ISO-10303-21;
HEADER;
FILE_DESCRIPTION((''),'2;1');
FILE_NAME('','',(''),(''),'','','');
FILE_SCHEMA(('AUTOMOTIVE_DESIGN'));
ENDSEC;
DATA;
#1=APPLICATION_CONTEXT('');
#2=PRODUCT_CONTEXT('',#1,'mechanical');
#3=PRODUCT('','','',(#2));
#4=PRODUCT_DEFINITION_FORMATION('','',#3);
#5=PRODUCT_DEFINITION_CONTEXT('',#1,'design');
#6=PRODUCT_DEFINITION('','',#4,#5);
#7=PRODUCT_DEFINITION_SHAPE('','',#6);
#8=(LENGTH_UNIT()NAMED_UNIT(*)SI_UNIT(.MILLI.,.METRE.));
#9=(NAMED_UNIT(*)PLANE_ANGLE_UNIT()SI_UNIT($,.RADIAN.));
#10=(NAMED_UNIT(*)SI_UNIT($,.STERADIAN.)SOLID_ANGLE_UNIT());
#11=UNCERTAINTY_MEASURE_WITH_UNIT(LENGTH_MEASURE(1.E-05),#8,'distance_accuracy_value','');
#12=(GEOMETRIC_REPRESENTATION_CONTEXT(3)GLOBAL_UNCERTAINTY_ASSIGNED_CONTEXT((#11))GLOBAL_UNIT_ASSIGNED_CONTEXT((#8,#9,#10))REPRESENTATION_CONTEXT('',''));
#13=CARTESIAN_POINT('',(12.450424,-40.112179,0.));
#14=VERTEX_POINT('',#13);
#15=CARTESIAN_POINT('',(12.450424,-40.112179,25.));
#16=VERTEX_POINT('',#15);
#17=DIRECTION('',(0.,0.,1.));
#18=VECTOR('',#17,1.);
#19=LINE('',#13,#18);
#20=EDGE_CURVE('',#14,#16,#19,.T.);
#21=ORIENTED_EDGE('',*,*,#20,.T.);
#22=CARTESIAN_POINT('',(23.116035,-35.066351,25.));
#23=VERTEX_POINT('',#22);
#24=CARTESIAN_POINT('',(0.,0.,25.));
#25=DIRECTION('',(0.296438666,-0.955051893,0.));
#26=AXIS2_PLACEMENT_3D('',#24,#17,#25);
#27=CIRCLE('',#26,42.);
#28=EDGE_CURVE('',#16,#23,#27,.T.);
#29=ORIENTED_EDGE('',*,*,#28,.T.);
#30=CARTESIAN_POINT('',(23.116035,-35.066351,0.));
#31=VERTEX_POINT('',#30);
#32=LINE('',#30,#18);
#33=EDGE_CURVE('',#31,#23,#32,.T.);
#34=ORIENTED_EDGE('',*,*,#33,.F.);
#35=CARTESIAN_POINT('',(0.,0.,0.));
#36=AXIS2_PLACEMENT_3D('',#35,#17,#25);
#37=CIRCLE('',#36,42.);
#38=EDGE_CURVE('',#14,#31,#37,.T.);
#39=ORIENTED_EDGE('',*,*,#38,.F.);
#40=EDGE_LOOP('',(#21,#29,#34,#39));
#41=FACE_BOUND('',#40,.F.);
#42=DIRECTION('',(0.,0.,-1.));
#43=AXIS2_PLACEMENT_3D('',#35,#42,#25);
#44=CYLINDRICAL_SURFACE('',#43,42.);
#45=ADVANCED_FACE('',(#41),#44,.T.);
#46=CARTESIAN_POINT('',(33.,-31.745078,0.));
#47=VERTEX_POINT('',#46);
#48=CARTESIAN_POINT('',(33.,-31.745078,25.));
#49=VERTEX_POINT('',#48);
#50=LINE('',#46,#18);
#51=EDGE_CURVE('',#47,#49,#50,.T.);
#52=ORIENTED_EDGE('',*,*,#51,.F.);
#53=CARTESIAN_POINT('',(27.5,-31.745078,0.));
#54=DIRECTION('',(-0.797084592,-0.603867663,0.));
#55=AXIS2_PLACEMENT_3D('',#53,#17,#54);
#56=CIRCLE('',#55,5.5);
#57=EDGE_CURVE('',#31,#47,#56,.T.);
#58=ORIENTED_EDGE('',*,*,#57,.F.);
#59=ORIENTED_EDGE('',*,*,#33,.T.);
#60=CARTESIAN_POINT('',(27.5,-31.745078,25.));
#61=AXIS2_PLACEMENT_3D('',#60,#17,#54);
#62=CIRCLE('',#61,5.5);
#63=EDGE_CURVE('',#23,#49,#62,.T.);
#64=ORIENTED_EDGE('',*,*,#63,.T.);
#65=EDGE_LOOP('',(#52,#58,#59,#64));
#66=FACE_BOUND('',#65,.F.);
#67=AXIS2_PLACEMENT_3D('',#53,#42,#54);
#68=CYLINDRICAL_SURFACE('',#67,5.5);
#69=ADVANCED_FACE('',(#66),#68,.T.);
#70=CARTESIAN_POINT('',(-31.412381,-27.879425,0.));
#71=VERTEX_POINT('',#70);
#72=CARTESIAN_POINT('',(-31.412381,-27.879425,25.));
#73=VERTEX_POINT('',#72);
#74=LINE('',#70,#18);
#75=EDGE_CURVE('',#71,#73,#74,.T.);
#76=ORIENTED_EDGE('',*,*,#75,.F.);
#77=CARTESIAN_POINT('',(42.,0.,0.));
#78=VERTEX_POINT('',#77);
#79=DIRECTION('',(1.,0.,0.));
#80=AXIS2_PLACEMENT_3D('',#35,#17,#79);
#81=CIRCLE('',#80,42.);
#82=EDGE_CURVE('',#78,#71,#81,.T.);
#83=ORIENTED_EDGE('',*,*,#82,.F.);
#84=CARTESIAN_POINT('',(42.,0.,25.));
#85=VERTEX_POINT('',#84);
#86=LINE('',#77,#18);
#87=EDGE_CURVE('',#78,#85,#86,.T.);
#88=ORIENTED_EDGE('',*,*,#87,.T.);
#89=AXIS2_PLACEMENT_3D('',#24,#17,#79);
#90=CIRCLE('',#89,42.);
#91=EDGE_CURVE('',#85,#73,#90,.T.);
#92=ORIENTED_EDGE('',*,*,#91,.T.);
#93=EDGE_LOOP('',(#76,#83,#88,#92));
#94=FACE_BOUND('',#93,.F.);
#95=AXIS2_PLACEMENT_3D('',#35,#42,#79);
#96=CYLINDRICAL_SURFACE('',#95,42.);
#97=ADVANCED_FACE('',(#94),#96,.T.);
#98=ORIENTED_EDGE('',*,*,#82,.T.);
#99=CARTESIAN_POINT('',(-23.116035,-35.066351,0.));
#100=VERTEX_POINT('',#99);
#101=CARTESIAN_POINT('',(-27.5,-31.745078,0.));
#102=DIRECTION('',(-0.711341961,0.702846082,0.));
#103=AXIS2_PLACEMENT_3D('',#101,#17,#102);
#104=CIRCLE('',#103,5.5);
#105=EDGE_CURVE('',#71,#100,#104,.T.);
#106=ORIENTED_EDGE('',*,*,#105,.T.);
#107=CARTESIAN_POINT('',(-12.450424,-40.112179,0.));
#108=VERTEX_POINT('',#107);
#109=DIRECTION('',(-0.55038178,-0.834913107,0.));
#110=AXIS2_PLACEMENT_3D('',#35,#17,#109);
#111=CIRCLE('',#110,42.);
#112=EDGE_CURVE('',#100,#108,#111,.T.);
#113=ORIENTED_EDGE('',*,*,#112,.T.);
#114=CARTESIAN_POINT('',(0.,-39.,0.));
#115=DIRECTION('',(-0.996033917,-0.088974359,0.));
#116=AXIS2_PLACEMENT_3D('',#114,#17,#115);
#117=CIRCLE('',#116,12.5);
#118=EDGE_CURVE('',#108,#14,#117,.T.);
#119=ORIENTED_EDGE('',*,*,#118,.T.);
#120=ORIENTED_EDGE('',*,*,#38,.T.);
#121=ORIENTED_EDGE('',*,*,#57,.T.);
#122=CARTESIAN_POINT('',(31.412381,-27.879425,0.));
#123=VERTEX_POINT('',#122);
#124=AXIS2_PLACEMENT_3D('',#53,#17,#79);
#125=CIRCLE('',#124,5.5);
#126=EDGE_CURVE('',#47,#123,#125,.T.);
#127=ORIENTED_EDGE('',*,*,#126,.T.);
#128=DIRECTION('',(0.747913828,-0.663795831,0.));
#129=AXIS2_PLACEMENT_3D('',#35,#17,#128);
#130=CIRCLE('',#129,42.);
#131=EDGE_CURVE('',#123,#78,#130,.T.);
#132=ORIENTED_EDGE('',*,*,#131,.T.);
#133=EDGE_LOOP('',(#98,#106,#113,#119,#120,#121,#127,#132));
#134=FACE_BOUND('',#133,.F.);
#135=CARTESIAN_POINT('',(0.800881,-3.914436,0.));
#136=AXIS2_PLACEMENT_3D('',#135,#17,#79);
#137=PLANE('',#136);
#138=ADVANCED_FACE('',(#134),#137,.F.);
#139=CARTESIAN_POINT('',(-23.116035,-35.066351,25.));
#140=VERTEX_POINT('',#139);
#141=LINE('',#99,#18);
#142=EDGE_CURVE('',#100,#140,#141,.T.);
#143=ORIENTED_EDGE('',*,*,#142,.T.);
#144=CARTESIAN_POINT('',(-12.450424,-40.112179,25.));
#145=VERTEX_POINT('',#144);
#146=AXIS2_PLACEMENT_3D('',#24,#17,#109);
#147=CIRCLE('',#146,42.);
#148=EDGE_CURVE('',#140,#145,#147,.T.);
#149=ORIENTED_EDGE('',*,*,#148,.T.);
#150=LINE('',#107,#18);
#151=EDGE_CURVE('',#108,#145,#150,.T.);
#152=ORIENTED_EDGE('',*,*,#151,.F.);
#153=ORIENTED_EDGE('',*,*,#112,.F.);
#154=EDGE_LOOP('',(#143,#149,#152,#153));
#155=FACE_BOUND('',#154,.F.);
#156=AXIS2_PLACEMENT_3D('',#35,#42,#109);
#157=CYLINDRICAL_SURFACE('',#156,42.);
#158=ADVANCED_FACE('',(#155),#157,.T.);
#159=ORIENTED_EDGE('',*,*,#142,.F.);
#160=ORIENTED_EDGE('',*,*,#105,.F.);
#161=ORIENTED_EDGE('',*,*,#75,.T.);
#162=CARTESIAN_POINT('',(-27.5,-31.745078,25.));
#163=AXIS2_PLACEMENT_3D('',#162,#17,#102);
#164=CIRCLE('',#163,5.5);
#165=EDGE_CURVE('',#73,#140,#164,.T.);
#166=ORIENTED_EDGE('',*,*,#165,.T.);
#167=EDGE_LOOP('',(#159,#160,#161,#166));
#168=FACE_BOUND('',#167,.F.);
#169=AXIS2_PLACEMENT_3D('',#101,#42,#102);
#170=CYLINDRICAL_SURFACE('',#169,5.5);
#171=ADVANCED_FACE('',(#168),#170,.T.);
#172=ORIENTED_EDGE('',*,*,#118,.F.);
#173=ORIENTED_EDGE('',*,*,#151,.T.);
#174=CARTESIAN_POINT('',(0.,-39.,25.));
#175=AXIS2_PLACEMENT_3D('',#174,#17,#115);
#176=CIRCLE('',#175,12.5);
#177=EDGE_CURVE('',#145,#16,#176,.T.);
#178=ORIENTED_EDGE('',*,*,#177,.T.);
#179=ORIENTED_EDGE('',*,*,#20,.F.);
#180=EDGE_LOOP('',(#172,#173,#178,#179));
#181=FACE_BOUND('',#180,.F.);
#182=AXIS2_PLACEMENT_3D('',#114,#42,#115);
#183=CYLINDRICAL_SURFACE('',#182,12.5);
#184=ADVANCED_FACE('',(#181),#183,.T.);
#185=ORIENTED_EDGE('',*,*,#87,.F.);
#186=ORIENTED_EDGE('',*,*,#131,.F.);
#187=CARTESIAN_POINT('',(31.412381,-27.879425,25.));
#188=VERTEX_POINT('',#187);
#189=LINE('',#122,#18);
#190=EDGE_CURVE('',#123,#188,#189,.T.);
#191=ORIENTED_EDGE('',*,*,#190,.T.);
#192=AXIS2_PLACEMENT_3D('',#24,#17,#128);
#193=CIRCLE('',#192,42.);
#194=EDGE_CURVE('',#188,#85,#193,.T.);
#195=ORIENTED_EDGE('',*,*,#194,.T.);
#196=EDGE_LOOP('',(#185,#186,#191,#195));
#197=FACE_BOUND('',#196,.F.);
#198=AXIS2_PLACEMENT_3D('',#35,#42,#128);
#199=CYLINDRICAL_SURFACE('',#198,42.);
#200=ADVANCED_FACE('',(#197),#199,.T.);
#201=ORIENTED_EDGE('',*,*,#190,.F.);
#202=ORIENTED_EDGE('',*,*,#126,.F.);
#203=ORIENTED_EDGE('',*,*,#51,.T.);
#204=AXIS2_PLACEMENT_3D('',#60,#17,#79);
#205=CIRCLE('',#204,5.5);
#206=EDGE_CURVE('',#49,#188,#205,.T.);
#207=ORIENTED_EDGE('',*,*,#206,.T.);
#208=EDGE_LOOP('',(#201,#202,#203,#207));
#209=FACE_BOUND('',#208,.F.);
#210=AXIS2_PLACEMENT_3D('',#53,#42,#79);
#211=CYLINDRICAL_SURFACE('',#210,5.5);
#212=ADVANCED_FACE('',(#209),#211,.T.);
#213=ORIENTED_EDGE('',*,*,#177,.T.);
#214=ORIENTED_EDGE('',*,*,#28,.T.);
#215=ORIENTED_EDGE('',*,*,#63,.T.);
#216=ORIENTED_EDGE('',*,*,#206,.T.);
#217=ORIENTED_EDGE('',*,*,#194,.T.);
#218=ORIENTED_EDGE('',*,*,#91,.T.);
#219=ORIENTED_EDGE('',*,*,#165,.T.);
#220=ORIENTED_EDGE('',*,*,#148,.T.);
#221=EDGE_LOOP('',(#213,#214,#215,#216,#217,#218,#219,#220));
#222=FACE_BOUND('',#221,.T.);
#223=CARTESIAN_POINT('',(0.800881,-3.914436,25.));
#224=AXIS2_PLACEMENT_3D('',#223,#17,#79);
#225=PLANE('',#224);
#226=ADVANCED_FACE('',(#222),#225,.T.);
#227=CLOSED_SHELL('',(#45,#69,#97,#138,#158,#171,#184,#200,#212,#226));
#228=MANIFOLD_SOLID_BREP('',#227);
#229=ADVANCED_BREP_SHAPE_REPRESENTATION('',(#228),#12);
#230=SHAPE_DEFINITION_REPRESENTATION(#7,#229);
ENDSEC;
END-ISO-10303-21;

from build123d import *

# Parameters (mm, degrees)
F1_DEPTH = 25


with BuildPart() as f1:
    # F0 (on Top) → F1 (new body)
    with BuildSketch(Plane.XY):
        with BuildLine():
            ThreePointArc((31.4123807864, -27.8794249104), (39.2639783582, -14.9110698304), (42, 0))
            ThreePointArc((42, 0), (-14.9110698304, 39.2639783582), (-31.4123807864, -27.8794249104))
            ThreePointArc((-31.4123807864, -27.8794249104), (-25.4105137384, -26.6574416615), (-22, -31.7450783587))
            ThreePointArc((-22, -31.7450783587), (-22.2864690998, -33.4969617889), (-23.1160347465, -35.066350503))
            ThreePointArc((-23.1160347465, -35.066350503), (-17.9613012827, -37.9656641748), (-12.4504239602, -40.1121794872))
            ThreePointArc((-12.4504239602, -40.1121794872), (-0.5566419395, -26.5124001605), (12.5, -39))
            ThreePointArc((12.5, -39), (12.4875998395, -39.5566419395), (12.4504239602, -40.1121794872))
            ThreePointArc((12.4504239602, -40.1121794872), (17.9613012827, -37.9656641748), (23.1160347465, -35.066350503))
            ThreePointArc((23.1160347465, -35.066350503), (23.8988095238, -27.5879847641), (31.4123807864, -27.8794249104))
        make_face()
        with BuildLine():
            ThreePointArc((-22, -31.7450783587), (-25.4105137384, -26.6574416615), (-31.4123807864, -27.8794249104))
            ThreePointArc((-31.4123807864, -27.8794249104), (-27.5, -31.7450783587), (-23.1160347465, -35.066350503))
            ThreePointArc((-23.1160347465, -35.066350503), (-22.2864690998, -33.4969617889), (-22, -31.7450783587))
        make_face()
        with BuildLine():
            ThreePointArc((-23.1160347465, -35.066350503), (-27.5, -31.7450783587), (-31.4123807864, -27.8794249104))
            ThreePointArc((-31.4123807864, -27.8794249104), (-31.1011904762, -35.9021719533), (-23.1160347465, -35.066350503))
        make_face()
        with BuildLine():
            ThreePointArc((33, -31.7450783587), (32.5876366972, -29.6555920971), (31.4123807864, -27.8794249104))
            ThreePointArc((31.4123807864, -27.8794249104), (27.5, -31.7450783587), (23.1160347465, -35.066350503))
            ThreePointArc((23.1160347465, -35.066350503), (29.2518834302, -36.9586092589), (33, -31.7450783587))
        make_face()
        with BuildLine():
            ThreePointArc((23.1160347465, -35.066350503), (27.5, -31.7450783587), (31.4123807864, -27.8794249104))
            ThreePointArc((31.4123807864, -27.8794249104), (23.8988095238, -27.5879847641), (23.1160347465, -35.066350503))
        make_face()
        with BuildLine():
            ThreePointArc((12.5, -39), (-0.5566419395, -26.5124001605), (-12.4504239602, -40.1121794872))
            ThreePointArc((-12.4504239602, -40.1121794872), (0, -42), (12.4504239602, -40.1121794872))
            ThreePointArc((12.4504239602, -40.1121794872), (12.4875998395, -39.5566419395), (12.5, -39))
        make_face()
        with BuildLine():
            ThreePointArc((12.4504239602, -40.1121794872), (0, -42), (-12.4504239602, -40.1121794872))
            ThreePointArc((-12.4504239602, -40.1121794872), (0, -51.5), (12.4504239602, -40.1121794872))
        make_face()
    extrude(amount=F1_DEPTH)


solid = f1.part
